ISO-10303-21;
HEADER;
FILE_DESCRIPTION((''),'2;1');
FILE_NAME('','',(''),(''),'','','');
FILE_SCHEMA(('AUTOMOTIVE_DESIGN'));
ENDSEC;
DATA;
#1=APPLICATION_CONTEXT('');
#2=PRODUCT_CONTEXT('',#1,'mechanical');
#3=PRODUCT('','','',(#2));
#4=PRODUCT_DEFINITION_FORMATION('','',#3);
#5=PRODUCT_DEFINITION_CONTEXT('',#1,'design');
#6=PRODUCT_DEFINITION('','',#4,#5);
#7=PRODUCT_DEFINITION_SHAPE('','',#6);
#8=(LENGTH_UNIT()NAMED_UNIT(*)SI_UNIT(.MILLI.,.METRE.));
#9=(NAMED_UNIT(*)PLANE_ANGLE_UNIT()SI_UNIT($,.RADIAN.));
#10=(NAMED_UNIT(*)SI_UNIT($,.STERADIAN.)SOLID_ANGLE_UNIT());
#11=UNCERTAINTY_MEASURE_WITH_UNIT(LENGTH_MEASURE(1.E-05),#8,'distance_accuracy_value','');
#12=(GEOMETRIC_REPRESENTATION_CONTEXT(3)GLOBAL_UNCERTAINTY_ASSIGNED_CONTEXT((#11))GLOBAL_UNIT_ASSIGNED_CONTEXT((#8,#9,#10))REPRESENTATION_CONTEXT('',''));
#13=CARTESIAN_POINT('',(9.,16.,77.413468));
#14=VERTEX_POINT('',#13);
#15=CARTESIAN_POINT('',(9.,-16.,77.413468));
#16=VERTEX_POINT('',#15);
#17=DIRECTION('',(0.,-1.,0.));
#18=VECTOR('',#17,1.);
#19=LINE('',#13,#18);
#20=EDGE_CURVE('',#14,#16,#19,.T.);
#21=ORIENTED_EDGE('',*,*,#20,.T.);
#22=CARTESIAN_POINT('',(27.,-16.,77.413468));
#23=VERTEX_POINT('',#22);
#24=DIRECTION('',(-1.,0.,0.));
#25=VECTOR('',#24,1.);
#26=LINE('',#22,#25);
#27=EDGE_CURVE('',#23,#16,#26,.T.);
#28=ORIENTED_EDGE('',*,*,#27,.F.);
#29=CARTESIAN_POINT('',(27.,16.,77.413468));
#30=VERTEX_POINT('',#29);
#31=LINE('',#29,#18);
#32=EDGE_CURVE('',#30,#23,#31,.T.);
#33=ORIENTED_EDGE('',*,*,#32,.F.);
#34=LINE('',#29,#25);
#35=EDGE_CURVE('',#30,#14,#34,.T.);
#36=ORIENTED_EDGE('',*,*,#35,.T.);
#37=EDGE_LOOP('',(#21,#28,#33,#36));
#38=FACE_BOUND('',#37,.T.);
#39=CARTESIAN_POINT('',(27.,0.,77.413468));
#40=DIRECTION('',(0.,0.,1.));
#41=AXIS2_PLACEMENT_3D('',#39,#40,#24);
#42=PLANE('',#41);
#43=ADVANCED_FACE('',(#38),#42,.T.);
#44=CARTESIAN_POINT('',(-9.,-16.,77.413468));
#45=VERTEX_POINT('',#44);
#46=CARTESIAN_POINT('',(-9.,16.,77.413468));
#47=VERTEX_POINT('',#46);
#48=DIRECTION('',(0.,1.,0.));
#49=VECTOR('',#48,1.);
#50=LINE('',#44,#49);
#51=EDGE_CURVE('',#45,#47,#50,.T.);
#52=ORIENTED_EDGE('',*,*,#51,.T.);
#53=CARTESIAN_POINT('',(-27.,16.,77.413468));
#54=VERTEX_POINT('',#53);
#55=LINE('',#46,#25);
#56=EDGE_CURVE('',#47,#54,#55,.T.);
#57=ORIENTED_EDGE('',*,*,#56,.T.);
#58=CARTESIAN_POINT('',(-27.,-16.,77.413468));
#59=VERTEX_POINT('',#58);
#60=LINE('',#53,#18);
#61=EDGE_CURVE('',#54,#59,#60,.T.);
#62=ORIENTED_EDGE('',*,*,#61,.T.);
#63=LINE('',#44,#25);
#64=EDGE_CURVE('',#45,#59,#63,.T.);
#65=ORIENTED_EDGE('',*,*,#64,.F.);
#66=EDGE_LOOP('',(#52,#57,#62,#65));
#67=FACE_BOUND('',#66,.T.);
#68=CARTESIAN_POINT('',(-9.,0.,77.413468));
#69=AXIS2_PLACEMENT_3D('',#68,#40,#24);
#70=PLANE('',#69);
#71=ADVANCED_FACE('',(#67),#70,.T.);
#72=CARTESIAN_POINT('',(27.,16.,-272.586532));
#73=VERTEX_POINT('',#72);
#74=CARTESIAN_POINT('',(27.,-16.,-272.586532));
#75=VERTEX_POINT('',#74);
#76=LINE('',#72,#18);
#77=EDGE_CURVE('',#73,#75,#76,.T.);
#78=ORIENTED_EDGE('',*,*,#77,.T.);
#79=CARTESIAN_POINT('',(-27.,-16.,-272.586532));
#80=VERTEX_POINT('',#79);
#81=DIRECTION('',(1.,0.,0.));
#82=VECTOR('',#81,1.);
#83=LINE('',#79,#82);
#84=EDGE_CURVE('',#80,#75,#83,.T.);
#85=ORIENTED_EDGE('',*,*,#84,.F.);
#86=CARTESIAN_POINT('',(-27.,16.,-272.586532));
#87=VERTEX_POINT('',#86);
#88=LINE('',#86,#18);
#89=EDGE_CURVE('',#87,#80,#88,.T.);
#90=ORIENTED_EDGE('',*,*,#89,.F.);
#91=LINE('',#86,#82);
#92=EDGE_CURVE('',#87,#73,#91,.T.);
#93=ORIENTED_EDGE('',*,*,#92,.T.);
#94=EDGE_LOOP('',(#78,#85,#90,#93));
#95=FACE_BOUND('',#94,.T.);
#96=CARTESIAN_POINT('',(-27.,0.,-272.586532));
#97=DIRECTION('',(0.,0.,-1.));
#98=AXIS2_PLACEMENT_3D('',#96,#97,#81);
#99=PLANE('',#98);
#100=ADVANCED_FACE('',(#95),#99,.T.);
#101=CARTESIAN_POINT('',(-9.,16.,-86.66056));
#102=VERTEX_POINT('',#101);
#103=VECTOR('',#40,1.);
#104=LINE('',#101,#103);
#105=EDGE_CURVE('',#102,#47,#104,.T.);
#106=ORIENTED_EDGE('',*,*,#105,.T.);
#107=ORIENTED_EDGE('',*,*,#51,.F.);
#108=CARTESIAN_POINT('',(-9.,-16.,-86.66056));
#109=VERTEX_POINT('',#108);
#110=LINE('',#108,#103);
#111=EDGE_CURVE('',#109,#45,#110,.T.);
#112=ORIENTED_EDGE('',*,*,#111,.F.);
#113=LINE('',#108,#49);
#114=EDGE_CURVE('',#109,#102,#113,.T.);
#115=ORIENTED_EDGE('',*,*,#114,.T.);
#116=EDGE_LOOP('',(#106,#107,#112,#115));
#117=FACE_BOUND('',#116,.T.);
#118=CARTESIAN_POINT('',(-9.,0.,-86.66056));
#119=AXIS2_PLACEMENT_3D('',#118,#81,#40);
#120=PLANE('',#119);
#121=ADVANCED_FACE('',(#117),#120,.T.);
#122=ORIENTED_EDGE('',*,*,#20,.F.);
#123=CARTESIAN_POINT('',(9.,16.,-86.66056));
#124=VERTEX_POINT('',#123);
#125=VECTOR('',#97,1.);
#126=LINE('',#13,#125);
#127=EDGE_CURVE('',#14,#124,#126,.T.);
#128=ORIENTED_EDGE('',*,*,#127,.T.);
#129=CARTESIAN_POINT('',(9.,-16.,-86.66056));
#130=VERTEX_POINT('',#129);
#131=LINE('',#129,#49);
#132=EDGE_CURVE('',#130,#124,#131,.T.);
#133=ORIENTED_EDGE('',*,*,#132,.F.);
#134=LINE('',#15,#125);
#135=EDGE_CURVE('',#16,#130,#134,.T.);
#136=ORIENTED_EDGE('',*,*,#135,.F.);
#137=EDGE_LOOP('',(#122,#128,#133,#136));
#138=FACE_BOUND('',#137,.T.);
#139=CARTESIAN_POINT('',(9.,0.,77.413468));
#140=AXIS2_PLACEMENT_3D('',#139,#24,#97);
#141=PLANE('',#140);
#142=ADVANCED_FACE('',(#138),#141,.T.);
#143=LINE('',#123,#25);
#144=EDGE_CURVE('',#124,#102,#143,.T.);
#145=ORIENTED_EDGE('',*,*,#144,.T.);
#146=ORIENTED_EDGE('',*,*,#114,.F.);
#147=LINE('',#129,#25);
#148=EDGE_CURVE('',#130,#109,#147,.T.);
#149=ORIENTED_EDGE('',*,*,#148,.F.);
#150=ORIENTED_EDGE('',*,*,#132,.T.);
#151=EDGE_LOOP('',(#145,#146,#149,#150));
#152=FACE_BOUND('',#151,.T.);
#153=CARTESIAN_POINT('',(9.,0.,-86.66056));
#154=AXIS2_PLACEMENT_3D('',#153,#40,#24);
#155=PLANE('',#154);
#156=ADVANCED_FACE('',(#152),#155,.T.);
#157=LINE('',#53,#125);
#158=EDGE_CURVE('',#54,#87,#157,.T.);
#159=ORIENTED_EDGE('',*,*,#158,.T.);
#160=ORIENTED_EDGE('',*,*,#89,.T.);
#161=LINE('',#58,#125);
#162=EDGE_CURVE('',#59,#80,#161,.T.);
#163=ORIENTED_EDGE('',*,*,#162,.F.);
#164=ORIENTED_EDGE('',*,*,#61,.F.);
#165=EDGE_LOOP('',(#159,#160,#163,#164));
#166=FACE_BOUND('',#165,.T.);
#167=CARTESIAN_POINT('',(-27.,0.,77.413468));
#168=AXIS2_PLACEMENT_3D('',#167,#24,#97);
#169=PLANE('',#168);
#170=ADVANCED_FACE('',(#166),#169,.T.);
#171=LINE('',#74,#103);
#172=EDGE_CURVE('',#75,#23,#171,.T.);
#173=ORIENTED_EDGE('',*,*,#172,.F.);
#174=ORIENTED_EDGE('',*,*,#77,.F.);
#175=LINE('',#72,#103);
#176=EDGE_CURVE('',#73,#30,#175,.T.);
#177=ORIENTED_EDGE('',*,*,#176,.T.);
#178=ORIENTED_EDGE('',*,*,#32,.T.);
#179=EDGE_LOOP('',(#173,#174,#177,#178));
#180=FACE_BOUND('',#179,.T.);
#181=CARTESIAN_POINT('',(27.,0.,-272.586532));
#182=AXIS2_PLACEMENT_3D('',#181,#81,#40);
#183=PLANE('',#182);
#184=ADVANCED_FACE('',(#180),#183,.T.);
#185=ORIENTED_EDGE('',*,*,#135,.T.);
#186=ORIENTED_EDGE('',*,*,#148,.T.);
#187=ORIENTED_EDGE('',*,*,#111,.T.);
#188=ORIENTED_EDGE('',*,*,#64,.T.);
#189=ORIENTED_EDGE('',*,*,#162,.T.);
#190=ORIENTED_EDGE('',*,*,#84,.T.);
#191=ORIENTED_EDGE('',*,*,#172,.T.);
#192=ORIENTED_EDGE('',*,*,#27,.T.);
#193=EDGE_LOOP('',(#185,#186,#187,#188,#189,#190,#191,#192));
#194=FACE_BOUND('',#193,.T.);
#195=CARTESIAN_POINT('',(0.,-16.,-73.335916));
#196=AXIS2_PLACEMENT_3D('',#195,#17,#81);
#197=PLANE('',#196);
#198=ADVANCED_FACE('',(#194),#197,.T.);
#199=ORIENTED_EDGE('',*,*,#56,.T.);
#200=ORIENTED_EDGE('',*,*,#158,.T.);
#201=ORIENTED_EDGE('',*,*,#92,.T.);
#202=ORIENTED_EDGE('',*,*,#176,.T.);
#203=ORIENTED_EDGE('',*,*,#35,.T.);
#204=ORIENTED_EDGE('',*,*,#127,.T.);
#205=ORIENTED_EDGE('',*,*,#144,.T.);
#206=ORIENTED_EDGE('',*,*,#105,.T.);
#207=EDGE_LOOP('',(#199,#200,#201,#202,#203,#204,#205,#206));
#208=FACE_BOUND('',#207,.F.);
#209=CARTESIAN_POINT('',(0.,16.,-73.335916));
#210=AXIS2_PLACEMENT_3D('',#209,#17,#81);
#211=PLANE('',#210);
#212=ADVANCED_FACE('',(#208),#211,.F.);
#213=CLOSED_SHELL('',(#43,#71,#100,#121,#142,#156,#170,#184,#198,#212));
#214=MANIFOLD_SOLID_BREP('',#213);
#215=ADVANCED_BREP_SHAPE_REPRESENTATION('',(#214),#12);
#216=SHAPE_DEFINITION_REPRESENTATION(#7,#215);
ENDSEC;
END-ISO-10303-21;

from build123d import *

# Parameters (mm, degrees)
F1_DEPTH      = 16
F1_DEPTH_BACK = 16


# Not quite as in the source:
# - a feature names something its author has since deleted; it is built from what else it names


with BuildPart() as f1:
    # F0 (on Front) → F1 (new body, two sides)
    with BuildSketch(Plane.XZ) as f1_sk:
        Polygon((-9, 77.4134680122), (-27, 77.4134680122), (-27, -272.5865319878), (-9, -272.5865319878), (9, -272.5865319878), (27, -272.5865319878), (27, 77.4134680122), (9, 77.4134680122), (9, -86.6605598913), (-9, -86.6605598913), align=None)
    extrude(amount=F1_DEPTH)
    extrude(f1_sk.sketch, amount=-F1_DEPTH_BACK)


solid = f1.part
